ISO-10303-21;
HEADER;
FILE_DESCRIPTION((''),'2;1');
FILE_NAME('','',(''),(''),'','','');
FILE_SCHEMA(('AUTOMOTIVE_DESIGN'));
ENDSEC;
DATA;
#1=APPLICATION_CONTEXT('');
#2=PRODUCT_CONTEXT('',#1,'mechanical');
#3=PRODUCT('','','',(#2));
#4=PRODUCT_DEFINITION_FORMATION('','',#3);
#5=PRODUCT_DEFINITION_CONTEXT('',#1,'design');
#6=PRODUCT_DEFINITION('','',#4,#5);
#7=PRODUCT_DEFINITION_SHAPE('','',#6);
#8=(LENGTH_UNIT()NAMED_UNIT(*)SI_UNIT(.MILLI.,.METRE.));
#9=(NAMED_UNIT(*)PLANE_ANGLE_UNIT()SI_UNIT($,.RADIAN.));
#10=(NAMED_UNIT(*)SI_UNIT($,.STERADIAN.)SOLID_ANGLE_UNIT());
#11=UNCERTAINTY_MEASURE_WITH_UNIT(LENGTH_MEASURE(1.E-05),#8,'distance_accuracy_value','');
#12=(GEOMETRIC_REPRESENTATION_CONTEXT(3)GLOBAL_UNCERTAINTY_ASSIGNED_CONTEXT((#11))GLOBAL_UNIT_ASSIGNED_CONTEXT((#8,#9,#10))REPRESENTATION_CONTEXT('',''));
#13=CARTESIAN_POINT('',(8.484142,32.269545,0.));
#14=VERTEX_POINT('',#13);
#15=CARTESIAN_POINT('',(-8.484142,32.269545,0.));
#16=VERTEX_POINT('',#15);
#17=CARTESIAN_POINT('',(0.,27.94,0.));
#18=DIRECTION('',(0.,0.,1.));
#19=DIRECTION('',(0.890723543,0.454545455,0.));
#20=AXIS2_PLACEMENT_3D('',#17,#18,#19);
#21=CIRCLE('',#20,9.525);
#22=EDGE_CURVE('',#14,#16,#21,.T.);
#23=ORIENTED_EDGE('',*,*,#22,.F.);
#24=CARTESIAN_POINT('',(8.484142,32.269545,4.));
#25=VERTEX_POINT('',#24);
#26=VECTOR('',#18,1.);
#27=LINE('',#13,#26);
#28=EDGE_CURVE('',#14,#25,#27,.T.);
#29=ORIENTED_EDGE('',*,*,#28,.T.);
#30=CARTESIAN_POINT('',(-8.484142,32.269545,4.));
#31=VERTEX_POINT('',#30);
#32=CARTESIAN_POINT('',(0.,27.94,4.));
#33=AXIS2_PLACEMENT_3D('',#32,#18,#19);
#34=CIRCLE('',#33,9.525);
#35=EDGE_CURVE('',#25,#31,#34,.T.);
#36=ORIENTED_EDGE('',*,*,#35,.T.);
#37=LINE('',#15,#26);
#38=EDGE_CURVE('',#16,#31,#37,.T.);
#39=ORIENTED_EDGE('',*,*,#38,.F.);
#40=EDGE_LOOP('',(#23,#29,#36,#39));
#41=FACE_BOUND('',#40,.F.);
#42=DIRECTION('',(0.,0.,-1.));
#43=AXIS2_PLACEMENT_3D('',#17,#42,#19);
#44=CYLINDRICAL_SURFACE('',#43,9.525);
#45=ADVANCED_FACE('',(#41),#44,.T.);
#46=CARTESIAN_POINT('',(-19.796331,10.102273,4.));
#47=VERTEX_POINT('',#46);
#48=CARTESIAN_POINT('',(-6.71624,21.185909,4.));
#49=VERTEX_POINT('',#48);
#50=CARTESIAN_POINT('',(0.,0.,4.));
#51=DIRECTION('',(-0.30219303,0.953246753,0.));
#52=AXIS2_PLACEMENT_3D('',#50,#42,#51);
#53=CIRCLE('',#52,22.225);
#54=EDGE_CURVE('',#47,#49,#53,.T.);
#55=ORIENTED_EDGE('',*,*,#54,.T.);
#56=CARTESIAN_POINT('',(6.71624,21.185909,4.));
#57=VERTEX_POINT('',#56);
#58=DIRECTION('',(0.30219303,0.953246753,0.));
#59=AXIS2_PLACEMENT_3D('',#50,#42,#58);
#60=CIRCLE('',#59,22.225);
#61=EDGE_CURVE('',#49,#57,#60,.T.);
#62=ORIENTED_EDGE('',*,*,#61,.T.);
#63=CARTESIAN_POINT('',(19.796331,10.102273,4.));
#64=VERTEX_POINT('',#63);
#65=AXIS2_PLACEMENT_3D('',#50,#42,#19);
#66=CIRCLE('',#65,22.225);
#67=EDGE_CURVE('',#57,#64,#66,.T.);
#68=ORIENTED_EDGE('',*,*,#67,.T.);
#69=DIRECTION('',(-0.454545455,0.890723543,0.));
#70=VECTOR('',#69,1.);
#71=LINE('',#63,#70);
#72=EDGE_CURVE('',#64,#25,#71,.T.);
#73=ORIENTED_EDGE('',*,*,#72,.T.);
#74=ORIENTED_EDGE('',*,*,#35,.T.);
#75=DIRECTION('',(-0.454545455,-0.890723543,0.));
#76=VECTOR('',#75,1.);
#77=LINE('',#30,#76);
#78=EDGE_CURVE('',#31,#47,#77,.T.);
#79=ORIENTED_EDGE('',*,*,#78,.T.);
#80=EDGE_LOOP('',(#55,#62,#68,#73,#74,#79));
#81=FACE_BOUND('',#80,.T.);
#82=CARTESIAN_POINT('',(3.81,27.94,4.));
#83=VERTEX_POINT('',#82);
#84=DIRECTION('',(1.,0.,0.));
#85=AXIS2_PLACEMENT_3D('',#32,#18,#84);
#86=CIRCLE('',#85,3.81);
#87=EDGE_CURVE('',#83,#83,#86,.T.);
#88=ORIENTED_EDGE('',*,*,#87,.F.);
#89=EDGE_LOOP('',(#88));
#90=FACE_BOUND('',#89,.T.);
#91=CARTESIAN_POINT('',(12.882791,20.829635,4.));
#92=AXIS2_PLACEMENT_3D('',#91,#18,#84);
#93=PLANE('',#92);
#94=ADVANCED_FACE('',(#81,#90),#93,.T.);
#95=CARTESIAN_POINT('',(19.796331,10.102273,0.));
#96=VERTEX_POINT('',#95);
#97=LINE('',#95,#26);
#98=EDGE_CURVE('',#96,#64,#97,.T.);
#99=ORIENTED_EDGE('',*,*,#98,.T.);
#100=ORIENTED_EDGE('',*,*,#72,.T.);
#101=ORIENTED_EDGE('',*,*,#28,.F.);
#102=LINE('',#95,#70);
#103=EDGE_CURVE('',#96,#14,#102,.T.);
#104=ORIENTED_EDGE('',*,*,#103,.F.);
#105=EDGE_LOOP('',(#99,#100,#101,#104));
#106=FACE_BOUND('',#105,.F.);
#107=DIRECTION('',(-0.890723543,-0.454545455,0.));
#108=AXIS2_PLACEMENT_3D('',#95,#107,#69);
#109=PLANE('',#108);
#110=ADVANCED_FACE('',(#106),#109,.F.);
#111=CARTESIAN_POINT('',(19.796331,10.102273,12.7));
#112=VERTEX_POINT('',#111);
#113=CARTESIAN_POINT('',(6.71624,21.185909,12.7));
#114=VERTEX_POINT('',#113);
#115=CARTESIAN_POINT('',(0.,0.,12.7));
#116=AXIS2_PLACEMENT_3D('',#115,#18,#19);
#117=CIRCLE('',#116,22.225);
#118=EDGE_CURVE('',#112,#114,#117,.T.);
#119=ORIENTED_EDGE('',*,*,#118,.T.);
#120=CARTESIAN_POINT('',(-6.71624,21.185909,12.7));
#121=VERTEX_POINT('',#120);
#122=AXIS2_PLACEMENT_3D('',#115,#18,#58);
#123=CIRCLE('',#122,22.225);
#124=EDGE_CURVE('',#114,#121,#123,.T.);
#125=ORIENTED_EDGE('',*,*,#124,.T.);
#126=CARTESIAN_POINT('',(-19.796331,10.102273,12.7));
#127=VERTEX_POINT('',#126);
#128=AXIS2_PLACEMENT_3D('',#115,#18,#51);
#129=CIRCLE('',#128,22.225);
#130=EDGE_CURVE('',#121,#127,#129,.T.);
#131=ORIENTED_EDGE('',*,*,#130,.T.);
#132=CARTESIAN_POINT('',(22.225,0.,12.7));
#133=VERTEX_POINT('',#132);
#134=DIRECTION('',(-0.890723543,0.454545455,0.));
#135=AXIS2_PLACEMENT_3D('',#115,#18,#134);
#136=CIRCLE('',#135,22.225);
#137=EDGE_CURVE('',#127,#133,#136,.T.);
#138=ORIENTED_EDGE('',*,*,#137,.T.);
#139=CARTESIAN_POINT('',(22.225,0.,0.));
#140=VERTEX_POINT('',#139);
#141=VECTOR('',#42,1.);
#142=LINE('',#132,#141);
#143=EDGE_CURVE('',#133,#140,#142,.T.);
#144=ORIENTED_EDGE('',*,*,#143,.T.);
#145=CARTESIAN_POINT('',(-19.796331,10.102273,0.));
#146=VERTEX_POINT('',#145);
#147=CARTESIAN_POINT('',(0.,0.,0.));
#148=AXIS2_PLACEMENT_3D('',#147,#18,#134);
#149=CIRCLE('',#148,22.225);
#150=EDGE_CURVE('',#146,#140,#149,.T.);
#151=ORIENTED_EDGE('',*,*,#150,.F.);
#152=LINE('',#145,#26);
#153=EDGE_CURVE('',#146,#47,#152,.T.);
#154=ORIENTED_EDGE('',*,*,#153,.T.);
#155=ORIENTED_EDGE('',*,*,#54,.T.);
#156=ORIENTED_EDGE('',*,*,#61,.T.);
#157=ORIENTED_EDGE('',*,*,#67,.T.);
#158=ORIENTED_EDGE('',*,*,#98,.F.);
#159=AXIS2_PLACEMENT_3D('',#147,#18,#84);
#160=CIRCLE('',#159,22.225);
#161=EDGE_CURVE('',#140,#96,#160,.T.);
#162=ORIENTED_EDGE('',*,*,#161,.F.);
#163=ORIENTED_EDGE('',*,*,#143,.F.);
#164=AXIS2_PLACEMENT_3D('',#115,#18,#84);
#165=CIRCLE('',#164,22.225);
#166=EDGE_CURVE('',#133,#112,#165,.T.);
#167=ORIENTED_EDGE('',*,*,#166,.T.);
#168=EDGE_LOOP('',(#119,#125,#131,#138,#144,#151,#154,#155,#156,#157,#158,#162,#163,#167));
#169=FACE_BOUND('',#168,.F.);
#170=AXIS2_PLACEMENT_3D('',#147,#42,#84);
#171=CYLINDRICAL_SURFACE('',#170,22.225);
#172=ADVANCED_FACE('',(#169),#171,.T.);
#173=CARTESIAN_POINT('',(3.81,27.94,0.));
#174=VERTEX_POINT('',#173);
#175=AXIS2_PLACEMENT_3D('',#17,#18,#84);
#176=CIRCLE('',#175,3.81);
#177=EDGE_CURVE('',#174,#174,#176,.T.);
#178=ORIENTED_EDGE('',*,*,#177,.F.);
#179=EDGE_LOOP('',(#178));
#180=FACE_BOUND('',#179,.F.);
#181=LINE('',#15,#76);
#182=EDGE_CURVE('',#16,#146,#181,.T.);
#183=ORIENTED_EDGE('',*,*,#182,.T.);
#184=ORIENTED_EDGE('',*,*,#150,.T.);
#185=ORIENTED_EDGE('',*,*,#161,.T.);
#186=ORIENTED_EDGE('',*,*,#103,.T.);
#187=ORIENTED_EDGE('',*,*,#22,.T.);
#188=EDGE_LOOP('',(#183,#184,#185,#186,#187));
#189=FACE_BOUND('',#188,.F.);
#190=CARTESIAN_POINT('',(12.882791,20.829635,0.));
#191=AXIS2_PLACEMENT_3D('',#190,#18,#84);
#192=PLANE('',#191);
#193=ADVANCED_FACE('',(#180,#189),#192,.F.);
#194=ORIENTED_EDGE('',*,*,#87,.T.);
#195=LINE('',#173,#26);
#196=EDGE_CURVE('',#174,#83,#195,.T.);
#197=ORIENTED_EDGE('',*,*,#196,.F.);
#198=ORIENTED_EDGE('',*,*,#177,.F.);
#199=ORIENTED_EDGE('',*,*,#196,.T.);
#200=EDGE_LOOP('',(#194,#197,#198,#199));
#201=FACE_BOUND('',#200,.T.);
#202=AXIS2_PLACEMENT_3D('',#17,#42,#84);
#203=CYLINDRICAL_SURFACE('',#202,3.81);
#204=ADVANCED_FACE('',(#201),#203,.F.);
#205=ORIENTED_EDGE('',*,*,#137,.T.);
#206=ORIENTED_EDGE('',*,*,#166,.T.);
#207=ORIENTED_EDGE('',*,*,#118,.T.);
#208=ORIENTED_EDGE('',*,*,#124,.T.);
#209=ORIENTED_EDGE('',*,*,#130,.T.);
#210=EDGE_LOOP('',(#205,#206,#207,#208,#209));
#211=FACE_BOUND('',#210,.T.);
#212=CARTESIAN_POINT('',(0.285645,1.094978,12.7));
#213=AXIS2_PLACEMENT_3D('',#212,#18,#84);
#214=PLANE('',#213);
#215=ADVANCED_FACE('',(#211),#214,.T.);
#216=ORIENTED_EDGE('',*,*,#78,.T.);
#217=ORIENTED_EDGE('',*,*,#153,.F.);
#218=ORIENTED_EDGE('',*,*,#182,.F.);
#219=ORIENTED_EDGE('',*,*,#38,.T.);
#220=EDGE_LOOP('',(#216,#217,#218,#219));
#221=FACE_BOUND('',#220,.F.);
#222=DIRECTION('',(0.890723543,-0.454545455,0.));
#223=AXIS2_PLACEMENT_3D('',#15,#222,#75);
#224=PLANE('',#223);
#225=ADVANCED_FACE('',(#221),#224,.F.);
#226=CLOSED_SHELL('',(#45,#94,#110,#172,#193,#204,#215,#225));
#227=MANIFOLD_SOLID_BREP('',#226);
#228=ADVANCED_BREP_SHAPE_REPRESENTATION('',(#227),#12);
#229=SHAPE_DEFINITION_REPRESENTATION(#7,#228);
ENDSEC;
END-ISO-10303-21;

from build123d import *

# Parameters (mm, degrees)
F0_R     = 3.81
F1_DEPTH = 4
F2_DEPTH = 12.7
F3_DEPTH = 10


# Not quite as in the source:
# - a feature names something its author has since deleted; it is built from what else it names


with BuildPart() as f1:
    # F0 (on Top) → F1 (new body)
    with BuildSketch(Plane.XY):
        with BuildLine():
            ThreePointArc((6.7162400934, 21.1859090909), (14.3680496868, 16.9561131513), (19.7963307394, 10.1022727273))
            Line((19.7963307394, 10.1022727273), (8.4841417455, 32.2695454545))
            ThreePointArc((8.4841417455, 32.2695454545), (9.2611304689, 30.1664517595), (9.525, 27.94))
            ThreePointArc((9.525, 27.94), (8.7948226784, 24.2825802736), (6.7162400934, 21.1859090909))
        make_face()
        with BuildLine():
            Line((-8.4841417455, 32.2695454545), (-19.7963307394, 10.1022727273))
            ThreePointArc((-19.7963307394, 10.1022727273), (-14.3680496868, 16.9561131513), (-6.7162400934, 21.1859090909))
            ThreePointArc((-6.7162400934, 21.1859090909), (-9.4060964683, 26.4396752924), (-8.4841417455, 32.2695454545))
        make_face()
        with BuildLine():
            ThreePointArc((-19.7963307394, 10.1022727273), (-5.1950541054, -21.6093044275), (22.225, 0))
            ThreePointArc((22.225, 0), (21.6093044275, 5.1950541054), (19.7963307394, 10.1022727273))
            ThreePointArc((19.7963307394, 10.1022727273), (14.3680496868, 16.9561131513), (6.7162400934, 21.1859090909))
            ThreePointArc((6.7162400934, 21.1859090909), (0, 18.415), (-6.7162400934, 21.1859090909))
            ThreePointArc((-6.7162400934, 21.1859090909), (-14.3680496868, 16.9561131513), (-19.7963307394, 10.1022727273))
        make_face()
        with BuildLine():
            ThreePointArc((-6.7162400934, 21.1859090909), (0, 22.225), (6.7162400934, 21.1859090909))
            ThreePointArc((6.7162400934, 21.1859090909), (8.7948226784, 24.2825802736), (9.525, 27.94))
            ThreePointArc((9.525, 27.94), (9.2611304689, 30.1664517595), (8.4841417455, 32.2695454545))
            ThreePointArc((8.4841417455, 32.2695454545), (0, 37.465), (-8.4841417455, 32.2695454545))
            ThreePointArc((-8.4841417455, 32.2695454545), (-9.4060964683, 26.4396752924), (-6.7162400934, 21.1859090909))
        make_face()
        with Locations((0, 27.94)):
            Circle(F0_R, mode=Mode.SUBTRACT)
        with BuildLine():
            ThreePointArc((-6.7162400934, 21.1859090909), (0, 18.415), (6.7162400934, 21.1859090909))
            ThreePointArc((6.7162400934, 21.1859090909), (0, 22.225), (-6.7162400934, 21.1859090909))
        make_face()
    extrude(amount=F1_DEPTH)

    # F0 (on Top) → F2 (join)
    with BuildSketch(Plane.XY):
        with BuildLine():
            ThreePointArc((-19.7963307394, 10.1022727273), (-5.1950541054, -21.6093044275), (22.225, 0))
            ThreePointArc((22.225, 0), (21.6093044275, 5.1950541054), (19.7963307394, 10.1022727273))
            ThreePointArc((19.7963307394, 10.1022727273), (14.3680496868, 16.9561131513), (6.7162400934, 21.1859090909))
            ThreePointArc((6.7162400934, 21.1859090909), (0, 18.415), (-6.7162400934, 21.1859090909))
            ThreePointArc((-6.7162400934, 21.1859090909), (-14.3680496868, 16.9561131513), (-19.7963307394, 10.1022727273))
        make_face()
        with BuildLine():
            ThreePointArc((-6.7162400934, 21.1859090909), (0, 18.415), (6.7162400934, 21.1859090909))
            ThreePointArc((6.7162400934, 21.1859090909), (0, 22.225), (-6.7162400934, 21.1859090909))
        make_face()
    extrude(amount=F2_DEPTH)

    # F0 (on Top) → F3 (join)
    with BuildSketch(Plane.XY):
        with BuildLine():
            ThreePointArc((-6.7162400934, 21.1859090909), (0, 18.415), (6.7162400934, 21.1859090909))
            ThreePointArc((6.7162400934, 21.1859090909), (0, 22.225), (-6.7162400934, 21.1859090909))
        make_face()
        with BuildLine():
            ThreePointArc((-19.7963307394, 10.1022727273), (-5.1950541054, -21.6093044275), (22.225, 0))
            ThreePointArc((22.225, 0), (21.6093044275, 5.1950541054), (19.7963307394, 10.1022727273))
            ThreePointArc((19.7963307394, 10.1022727273), (14.3680496868, 16.9561131513), (6.7162400934, 21.1859090909))
            ThreePointArc((6.7162400934, 21.1859090909), (0, 18.415), (-6.7162400934, 21.1859090909))
            ThreePointArc((-6.7162400934, 21.1859090909), (-14.3680496868, 16.9561131513), (-19.7963307394, 10.1022727273))
        make_face()
    extrude(amount=F3_DEPTH)


solid = f1.part
